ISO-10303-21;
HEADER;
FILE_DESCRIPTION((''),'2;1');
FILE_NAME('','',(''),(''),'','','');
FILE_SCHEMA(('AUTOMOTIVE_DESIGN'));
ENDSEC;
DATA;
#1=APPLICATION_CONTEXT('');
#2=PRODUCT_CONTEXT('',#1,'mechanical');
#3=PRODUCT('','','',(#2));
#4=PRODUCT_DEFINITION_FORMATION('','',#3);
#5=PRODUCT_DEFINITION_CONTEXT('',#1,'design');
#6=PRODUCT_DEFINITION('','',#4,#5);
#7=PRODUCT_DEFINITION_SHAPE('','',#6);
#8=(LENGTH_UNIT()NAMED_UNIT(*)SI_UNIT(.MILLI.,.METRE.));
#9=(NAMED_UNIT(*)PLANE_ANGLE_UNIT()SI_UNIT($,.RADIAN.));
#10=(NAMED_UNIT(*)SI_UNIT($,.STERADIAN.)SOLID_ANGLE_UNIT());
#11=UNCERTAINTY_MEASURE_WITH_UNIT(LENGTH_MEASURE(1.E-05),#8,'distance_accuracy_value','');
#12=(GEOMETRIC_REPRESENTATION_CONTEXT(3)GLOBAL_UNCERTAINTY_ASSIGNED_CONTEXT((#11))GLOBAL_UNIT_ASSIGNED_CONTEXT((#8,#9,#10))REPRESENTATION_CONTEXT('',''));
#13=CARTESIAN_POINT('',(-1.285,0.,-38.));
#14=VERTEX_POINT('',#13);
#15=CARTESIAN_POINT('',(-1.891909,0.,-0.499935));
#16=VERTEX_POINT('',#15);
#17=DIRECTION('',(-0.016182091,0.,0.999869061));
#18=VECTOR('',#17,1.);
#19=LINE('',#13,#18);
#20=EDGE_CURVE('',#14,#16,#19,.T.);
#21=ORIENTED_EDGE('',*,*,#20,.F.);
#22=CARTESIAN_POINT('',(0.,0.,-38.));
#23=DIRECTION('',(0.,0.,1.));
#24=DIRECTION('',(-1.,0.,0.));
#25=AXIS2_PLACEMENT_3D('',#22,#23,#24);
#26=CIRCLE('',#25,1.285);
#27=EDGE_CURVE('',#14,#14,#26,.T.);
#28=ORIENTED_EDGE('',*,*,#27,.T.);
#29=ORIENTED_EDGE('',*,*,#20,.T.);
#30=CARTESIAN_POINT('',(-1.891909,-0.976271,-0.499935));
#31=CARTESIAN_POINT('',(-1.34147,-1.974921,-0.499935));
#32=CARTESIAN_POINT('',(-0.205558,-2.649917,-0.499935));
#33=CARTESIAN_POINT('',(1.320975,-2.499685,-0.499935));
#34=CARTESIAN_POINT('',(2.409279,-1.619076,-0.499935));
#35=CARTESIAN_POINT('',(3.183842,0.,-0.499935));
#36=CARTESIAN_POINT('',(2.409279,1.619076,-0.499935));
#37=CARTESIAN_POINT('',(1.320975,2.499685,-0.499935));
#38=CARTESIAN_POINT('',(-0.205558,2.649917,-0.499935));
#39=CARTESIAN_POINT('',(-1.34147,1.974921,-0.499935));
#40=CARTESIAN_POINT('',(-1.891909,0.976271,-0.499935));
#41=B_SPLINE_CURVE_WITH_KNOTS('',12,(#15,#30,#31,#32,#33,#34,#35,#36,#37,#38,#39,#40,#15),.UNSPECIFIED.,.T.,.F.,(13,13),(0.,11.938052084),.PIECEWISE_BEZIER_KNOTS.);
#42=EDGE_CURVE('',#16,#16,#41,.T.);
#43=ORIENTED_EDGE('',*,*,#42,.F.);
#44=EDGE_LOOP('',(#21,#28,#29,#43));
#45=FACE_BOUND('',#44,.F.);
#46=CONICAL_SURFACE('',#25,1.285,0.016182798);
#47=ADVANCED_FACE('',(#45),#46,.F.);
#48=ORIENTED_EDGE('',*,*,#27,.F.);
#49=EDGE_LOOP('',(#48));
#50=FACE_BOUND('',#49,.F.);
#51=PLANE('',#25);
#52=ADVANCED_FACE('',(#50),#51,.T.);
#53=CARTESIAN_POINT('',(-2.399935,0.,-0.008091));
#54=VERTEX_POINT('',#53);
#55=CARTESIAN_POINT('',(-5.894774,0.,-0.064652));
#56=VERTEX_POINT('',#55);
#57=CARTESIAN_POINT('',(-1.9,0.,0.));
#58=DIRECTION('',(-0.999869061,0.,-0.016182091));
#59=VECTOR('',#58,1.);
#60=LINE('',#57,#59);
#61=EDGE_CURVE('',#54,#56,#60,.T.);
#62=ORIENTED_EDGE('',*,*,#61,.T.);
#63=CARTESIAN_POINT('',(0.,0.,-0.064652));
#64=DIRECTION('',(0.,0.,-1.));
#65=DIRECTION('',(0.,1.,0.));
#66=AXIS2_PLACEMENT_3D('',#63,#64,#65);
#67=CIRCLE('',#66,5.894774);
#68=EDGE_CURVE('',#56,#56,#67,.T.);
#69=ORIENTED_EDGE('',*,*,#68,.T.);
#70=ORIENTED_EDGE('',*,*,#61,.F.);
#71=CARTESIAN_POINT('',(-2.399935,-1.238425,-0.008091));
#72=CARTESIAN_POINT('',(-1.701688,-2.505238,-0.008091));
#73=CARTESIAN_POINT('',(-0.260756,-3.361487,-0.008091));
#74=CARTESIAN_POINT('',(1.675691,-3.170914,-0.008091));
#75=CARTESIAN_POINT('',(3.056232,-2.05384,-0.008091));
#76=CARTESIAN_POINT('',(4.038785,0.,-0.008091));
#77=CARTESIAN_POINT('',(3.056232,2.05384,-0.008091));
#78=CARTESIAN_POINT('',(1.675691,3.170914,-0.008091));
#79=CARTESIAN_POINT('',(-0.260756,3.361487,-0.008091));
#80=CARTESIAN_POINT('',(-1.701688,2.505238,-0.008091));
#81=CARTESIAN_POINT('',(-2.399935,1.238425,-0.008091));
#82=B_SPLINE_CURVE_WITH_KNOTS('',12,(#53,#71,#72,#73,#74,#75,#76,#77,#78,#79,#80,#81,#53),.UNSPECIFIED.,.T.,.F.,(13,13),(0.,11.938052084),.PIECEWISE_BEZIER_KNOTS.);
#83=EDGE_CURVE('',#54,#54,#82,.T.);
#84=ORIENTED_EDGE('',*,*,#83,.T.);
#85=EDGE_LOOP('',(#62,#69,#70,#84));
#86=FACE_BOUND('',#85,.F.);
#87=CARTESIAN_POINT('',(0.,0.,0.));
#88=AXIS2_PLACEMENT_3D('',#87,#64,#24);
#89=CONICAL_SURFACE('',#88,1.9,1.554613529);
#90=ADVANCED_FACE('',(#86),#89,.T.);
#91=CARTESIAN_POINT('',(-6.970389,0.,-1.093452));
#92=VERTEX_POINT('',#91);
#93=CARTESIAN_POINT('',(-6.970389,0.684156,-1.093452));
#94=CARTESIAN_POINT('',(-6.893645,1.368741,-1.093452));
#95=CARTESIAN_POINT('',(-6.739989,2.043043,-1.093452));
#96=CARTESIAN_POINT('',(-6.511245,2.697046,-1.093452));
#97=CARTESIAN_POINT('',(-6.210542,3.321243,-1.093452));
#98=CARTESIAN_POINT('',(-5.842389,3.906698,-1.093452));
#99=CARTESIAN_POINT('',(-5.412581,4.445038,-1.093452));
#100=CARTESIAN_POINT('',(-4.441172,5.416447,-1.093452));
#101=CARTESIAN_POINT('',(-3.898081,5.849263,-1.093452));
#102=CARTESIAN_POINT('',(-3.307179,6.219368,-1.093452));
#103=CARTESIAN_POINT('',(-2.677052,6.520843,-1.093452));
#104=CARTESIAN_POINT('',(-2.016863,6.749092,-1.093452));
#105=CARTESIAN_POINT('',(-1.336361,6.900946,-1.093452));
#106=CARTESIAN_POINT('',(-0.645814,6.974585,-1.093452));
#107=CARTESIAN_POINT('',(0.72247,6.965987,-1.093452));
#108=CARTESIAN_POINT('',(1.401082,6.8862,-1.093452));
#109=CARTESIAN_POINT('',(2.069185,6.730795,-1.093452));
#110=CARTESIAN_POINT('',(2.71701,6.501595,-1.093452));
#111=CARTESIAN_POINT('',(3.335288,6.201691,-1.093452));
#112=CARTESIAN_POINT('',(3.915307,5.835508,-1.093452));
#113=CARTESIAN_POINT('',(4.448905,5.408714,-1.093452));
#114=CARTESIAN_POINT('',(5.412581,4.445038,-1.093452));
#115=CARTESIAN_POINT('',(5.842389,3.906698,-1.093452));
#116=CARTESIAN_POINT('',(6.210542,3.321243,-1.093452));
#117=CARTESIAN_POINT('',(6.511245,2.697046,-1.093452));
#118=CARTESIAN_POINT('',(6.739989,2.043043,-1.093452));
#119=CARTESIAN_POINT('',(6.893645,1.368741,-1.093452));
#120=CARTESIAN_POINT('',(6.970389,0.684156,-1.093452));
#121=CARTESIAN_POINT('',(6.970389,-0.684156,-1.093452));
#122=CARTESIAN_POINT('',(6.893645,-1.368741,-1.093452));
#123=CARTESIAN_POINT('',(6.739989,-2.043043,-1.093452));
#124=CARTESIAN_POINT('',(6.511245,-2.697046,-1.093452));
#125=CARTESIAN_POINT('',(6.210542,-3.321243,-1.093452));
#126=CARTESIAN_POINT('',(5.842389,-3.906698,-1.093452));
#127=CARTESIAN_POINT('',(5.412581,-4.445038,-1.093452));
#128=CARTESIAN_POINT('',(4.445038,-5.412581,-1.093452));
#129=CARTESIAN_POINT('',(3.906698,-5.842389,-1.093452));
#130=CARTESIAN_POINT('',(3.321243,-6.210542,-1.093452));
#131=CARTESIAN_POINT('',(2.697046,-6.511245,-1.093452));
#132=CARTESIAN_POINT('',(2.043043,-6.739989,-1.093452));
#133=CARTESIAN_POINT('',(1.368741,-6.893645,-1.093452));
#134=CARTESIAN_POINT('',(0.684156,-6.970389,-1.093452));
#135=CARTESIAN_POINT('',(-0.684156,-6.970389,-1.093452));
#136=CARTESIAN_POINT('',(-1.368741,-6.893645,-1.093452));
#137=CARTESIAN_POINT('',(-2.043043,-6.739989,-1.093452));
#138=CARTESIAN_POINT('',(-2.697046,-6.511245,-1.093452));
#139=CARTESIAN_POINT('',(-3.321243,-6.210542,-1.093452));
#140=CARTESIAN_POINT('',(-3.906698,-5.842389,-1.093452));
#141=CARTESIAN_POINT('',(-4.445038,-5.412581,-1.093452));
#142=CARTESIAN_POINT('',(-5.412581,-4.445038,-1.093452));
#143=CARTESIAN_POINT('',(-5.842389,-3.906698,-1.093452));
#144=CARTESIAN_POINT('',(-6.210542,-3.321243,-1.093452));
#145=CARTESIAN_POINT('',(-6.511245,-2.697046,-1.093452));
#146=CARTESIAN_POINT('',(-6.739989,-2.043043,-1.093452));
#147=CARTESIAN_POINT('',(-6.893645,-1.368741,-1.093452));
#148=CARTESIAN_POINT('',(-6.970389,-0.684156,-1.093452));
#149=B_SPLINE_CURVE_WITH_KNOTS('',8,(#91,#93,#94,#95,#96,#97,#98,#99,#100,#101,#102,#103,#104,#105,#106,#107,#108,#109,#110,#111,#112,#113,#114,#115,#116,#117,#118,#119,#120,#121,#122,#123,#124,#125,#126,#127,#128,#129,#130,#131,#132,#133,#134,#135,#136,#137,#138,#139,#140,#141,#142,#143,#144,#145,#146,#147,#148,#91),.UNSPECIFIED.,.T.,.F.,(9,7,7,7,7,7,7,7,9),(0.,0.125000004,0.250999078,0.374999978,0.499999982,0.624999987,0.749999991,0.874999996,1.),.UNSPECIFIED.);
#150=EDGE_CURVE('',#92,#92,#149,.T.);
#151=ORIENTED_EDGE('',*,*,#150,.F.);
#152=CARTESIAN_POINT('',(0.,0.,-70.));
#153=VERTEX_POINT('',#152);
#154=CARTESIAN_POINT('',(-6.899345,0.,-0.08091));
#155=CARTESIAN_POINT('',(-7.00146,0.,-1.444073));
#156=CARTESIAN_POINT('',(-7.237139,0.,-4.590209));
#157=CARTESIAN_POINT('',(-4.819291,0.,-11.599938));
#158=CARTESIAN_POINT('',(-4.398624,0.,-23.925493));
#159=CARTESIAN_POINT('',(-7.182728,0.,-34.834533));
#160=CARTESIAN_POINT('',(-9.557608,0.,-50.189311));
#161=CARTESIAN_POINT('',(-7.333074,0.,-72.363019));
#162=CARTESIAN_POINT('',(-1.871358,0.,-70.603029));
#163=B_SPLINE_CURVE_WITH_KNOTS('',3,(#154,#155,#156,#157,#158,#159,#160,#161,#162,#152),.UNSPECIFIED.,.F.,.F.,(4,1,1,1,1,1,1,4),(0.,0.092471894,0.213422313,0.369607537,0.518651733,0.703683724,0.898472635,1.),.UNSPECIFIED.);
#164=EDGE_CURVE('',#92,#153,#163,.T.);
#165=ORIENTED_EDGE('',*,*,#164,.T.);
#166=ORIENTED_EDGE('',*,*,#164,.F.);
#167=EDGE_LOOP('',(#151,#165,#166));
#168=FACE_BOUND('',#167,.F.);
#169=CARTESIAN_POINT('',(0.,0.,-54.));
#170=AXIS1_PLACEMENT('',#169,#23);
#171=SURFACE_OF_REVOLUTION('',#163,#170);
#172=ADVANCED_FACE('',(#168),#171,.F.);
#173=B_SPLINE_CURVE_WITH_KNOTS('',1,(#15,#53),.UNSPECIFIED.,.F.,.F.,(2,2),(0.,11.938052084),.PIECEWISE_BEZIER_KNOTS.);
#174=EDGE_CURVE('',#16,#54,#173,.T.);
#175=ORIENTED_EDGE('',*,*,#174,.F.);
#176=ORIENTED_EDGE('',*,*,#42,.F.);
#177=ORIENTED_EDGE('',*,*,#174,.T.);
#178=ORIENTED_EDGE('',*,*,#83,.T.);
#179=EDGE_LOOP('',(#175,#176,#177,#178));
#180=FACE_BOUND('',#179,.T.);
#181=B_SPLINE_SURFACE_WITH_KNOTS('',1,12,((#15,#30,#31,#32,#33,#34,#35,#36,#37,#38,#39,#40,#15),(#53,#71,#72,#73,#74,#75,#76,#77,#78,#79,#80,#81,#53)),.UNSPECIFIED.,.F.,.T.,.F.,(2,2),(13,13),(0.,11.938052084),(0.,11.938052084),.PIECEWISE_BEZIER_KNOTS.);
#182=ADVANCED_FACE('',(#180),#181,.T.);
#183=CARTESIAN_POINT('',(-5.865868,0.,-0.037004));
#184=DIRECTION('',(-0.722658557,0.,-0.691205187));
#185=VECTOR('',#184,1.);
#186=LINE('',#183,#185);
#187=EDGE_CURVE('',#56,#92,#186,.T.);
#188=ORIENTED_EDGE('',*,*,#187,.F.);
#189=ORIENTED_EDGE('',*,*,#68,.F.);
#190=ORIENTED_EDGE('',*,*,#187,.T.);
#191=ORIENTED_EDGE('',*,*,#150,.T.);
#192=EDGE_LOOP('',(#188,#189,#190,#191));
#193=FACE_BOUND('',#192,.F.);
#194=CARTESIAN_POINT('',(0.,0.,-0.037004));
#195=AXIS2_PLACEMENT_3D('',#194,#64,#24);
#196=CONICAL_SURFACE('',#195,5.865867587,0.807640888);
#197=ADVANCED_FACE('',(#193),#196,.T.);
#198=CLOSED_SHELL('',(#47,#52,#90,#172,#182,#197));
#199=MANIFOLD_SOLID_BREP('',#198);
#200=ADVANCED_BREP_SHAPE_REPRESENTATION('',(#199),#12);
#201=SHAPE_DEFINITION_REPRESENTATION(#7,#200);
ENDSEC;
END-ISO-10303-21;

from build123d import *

# Parameters (mm, degrees)
F2_SIZE = 0.5


# Not quite as in the source:
# - a fillet or chamfer that OpenCascade refuses, or shapes differently, is made with other operations: its cross-section is extruded or revolved along the edge and cut away or added


with BuildPart() as f1:
    # F0 (on Front) → F1 (revolve)
    with BuildSketch(Plane.XZ):
        with BuildLine():
            Line((0, -70), (0, -38))
            Line((0, -38), (-1.285, -38))
            Line((-1.285, -38), (-1.9, 0))
            Line((-1.9, 0), (-6.8993453069, -0.0809104569))
            add(Edge.make_bspline(
                [(-6.8993453069, -0.0809104569), (-7.0014603061, -1.4440725122), (-7.2371386125, -4.5902089989), (-4.8192908443, -11.5999377193), (-4.3986237704, -23.9254930043), (-7.1827283169, -34.8345330377), (-9.5576079288, -50.1893109589), (-7.3330742685, -72.3630189234), (-1.871357568, -70.6030285776), (0, -70)],
                knots=[0, 0, 0, 0, 0.0924718936, 0.2134223127, 0.3696075366, 0.5186517332, 0.7036837237, 0.8984726348, 1, 1, 1, 1], degree=3))
        make_face()
    revolve(axis=Axis((0, 0, -54), (0, 0, 1)))

    # F2
    f2_edges = [f1.edges().sort_by_distance(p)[0] for p in [
        (1.9, 0, 0),
    ]]
    chamfer(f2_edges, length=F2_SIZE)

    # F3: chamfer of 1 on 1 edges, made by hand

    # F3_s1 → F3_t2 (revolve, cut)
    with BuildSketch(Plane.XZ):
        with BuildLine():
            Line((-5.8658675874, -0.0370040548), (-6.9992956914, -1.1211002402))
            Line((-6.9992956914, -1.1211002402), (-7.0192588963, -1.1198876194))
            ThreePointArc((-7.0192588963, -1.1198876194), (-6.9576592361, -0.6004122497), (-6.9192894263, -0.0794164352))
            Line((-6.9192894263, -0.0794164352), (-6.8996689488, -0.0609130757))
            ThreePointArc((-6.8996689488, -0.0609130757), (-6.3827102001, -0.0525465065), (-5.8661912292, -0.0170066736))
            Line((-5.8661912292, -0.0170066736), (-5.8658675874, -0.0370040548))
        make_face()
    revolve(axis=Axis((0, 0, -0.0809104569), (0, 0, 1)), mode=Mode.SUBTRACT)


solid = f1.part
